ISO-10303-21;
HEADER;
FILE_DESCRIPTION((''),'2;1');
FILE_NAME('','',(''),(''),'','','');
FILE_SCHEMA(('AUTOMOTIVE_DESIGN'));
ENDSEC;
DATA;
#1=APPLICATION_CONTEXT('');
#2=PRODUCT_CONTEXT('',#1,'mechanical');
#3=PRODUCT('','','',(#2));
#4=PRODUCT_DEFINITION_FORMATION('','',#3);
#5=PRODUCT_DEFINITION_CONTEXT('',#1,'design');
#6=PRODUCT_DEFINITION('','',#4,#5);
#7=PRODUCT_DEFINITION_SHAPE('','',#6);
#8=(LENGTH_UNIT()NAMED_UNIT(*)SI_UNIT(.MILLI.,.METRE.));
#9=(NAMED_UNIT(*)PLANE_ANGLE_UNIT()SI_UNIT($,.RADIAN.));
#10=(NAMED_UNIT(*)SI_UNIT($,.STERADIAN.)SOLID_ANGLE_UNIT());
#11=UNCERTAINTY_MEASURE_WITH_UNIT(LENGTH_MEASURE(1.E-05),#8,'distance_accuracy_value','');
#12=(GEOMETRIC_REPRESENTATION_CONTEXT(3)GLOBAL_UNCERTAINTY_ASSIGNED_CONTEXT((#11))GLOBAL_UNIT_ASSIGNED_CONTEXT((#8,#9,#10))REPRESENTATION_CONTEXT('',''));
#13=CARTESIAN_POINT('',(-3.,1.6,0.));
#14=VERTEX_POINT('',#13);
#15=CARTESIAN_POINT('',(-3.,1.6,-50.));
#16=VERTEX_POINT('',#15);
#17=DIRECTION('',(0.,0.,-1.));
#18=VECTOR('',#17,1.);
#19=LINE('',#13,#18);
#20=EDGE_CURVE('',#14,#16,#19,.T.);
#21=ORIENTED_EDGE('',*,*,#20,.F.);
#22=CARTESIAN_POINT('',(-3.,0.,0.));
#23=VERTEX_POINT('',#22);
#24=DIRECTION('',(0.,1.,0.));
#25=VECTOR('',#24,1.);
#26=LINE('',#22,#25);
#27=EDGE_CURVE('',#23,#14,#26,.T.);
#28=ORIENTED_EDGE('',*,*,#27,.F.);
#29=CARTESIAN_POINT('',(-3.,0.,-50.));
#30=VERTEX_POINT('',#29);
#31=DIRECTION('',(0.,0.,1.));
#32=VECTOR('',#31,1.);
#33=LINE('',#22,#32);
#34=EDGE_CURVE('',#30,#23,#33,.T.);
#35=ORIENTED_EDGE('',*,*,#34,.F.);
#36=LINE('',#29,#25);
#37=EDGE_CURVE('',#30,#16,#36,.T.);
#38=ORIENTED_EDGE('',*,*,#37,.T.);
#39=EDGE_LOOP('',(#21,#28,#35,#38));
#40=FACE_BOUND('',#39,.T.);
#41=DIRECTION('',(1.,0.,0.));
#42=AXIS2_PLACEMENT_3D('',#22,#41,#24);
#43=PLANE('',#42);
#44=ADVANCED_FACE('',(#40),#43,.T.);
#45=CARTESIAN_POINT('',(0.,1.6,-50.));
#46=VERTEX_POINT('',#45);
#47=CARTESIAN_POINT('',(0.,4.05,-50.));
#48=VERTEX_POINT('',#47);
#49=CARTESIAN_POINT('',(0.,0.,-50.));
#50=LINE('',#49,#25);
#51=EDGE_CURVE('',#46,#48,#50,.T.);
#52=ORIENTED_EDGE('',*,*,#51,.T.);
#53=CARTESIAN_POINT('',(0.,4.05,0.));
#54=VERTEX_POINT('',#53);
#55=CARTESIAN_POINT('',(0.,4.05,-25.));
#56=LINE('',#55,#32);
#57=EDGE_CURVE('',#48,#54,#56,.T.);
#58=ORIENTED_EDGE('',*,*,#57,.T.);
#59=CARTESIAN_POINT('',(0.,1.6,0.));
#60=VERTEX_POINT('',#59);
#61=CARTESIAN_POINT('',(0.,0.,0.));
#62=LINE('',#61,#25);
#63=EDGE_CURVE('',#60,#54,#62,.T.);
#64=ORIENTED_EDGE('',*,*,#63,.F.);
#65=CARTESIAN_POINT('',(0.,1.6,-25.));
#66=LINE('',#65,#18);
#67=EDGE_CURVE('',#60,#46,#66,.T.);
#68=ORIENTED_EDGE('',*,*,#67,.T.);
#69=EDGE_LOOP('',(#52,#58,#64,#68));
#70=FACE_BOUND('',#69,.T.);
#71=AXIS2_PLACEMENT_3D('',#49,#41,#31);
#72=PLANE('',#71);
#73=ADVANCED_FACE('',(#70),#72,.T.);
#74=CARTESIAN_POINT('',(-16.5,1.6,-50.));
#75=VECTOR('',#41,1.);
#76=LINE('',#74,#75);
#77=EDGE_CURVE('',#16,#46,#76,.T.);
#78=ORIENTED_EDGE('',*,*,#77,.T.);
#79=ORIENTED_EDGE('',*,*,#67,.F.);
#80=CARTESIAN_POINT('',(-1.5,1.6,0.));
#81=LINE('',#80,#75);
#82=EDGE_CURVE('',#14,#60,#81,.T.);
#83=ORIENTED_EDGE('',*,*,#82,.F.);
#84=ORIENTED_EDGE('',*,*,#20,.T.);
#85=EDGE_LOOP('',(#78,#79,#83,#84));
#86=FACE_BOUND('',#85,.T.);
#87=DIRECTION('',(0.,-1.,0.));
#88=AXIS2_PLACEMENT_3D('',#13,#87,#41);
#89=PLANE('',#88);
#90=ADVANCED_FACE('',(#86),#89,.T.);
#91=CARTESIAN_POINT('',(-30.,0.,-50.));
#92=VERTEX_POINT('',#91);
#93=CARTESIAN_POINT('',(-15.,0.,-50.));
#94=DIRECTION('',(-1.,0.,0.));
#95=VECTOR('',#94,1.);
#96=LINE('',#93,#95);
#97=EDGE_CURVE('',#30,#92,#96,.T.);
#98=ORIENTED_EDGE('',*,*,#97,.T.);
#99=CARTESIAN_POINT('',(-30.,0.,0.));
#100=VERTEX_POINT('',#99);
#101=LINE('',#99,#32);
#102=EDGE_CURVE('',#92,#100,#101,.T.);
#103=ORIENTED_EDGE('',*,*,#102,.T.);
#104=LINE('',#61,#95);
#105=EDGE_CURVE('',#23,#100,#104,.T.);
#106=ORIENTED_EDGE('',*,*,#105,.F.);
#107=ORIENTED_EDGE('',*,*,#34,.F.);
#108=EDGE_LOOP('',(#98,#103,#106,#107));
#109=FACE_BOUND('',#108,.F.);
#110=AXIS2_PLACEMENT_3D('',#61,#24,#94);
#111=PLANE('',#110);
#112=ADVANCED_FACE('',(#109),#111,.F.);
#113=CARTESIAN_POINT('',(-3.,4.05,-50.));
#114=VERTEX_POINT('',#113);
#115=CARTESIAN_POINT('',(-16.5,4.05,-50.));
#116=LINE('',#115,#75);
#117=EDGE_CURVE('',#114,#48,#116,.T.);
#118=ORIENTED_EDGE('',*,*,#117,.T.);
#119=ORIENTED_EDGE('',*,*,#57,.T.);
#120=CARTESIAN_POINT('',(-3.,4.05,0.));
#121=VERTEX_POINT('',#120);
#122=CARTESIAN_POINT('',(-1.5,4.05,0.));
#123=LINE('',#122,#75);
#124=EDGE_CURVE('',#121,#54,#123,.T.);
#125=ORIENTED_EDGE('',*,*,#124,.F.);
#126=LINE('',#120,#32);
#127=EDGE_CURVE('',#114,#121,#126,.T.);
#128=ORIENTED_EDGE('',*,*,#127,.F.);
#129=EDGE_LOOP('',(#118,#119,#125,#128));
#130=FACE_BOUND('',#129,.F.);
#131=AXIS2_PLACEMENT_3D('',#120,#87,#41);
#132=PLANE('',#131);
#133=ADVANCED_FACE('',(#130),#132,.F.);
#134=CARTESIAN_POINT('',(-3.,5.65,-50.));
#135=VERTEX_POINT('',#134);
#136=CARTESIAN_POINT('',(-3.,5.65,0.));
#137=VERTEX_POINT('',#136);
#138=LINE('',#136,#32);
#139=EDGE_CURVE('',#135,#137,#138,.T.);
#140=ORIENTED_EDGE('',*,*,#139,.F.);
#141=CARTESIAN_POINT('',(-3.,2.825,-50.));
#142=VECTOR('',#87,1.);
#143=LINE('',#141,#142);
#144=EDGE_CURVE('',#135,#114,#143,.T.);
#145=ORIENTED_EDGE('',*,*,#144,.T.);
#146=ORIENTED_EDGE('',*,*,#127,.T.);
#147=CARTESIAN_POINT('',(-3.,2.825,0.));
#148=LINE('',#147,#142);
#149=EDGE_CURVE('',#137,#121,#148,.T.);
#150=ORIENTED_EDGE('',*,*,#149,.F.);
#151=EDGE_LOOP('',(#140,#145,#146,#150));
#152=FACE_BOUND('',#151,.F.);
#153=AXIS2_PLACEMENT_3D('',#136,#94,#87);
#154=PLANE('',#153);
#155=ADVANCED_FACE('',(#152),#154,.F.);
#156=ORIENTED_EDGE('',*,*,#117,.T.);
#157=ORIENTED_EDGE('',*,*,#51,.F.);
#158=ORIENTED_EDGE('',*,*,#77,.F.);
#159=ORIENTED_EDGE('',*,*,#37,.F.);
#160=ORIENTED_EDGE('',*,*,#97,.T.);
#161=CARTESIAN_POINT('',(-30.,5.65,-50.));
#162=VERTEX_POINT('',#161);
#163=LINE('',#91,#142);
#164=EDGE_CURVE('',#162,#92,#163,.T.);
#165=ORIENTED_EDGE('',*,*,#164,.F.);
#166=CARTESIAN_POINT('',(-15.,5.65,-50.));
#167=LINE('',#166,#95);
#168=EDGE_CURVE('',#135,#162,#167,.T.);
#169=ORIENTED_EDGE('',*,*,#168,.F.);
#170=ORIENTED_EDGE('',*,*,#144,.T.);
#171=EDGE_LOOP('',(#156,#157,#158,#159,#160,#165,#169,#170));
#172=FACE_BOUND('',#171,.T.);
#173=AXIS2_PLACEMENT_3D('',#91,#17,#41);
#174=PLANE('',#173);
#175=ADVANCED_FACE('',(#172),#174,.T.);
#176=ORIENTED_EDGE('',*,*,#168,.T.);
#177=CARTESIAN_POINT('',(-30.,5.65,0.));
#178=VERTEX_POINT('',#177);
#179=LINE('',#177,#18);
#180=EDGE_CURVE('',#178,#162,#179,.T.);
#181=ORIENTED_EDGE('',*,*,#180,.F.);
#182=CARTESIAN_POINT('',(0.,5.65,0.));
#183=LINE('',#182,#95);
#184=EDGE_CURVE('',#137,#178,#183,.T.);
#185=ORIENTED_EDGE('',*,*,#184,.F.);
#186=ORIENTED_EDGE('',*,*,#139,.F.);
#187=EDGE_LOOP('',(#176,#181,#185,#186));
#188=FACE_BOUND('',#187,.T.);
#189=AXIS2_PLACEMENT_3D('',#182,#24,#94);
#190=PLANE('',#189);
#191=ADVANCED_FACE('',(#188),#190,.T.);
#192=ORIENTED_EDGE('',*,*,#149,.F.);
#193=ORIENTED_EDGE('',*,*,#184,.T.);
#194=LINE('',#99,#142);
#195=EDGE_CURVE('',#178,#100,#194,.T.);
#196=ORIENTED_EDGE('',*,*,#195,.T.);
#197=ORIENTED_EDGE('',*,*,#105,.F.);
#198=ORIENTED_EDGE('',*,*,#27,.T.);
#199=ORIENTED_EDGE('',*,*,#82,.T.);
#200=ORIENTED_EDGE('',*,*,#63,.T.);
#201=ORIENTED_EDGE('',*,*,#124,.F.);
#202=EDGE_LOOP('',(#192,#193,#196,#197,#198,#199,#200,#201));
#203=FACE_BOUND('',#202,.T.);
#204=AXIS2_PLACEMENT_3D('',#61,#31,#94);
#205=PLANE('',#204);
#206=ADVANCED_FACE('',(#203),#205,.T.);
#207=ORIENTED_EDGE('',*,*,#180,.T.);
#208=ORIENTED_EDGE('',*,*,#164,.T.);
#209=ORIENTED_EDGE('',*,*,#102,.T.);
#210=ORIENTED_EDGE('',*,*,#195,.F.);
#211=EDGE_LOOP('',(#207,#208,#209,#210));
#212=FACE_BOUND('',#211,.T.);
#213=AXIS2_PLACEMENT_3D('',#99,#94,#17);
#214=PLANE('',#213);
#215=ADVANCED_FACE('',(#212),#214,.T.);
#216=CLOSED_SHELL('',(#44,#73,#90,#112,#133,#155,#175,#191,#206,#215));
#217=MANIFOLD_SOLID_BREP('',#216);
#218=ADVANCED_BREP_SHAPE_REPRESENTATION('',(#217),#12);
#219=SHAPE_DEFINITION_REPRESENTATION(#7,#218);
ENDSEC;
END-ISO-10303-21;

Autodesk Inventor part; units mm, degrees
ref_plane "YZ Plane" through (0, 0, 0) normal (1, 0, 0) x (0, 1, 0)
ref_plane "XZ Plane" through (0, 0, 0) normal (0, 1, 0) x (-1, 0, 0)
ref_plane "XY Plane" through (0, 0, 0) normal (0, 0, 1) x (1, 0, 0)
sketch "Sketch1" plane through (0, 0, 0) normal (0, 1, 0) x (-1, 0, 0)
  line L0 (0, 0) -> (30, 0)
  line L1 (30, 0) -> (30, -50)
  line L2 (30, -50) -> (0, -50)
  line L3 (0, -50) -> (0, 0)
  dimension "d0" = 30
  dimension "d1" = 50
extrude "Extrusion1" add sketch "Sketch1" along normal blind 5.65
sketch "Sketch2" plane through (-30, 0, 0) normal (0, 0, 1) x (1, 0, 0)
  line L0 (30, 0) -> (0, 0) projected
  line L1 (30, 0) -> (30, 5.65) projected
  line L2 (0, 5.65) -> (30, 5.65) projected
  line L3 (0, 0) -> (0, 5.65) projected
  line L4 (30, 0) -> (0, 0) projected
  line L5 (30, 0) -> (27, 0)
  line L6 (27, 0) -> (27, 1.5)
  line L7 (27, 1.5) -> (30, 1.5)
  line L8 (30, 1.5) -> (30, 0)
  line L9 (30, 5.65) -> (27, 5.65)
  line L10 (27, 5.65) -> (27, 4.15)
  line L11 (27, 4.15) -> (30, 4.15)
  line L12 (30, 4.15) -> (30, 5.65)
  dimension "d4" = 3
  dimension "d5" = 1.5
  dimension "d6" = 3
  dimension "d7" = 1.5
extrude "Extrusion2" cut sketch "Sketch2" against normal up to surface (50 mm away) contours L0 L6 L7 L1 | L11 L10 L2 L1
move faces "Move1" translate (0, -0.1, 0) faces at (-2, 4.15, -16.6667)
move faces "Move2" translate (0, 0.1, 0) faces at (-1, 1.5, -16.6667)
properties part number "Maze Wall Middle"
